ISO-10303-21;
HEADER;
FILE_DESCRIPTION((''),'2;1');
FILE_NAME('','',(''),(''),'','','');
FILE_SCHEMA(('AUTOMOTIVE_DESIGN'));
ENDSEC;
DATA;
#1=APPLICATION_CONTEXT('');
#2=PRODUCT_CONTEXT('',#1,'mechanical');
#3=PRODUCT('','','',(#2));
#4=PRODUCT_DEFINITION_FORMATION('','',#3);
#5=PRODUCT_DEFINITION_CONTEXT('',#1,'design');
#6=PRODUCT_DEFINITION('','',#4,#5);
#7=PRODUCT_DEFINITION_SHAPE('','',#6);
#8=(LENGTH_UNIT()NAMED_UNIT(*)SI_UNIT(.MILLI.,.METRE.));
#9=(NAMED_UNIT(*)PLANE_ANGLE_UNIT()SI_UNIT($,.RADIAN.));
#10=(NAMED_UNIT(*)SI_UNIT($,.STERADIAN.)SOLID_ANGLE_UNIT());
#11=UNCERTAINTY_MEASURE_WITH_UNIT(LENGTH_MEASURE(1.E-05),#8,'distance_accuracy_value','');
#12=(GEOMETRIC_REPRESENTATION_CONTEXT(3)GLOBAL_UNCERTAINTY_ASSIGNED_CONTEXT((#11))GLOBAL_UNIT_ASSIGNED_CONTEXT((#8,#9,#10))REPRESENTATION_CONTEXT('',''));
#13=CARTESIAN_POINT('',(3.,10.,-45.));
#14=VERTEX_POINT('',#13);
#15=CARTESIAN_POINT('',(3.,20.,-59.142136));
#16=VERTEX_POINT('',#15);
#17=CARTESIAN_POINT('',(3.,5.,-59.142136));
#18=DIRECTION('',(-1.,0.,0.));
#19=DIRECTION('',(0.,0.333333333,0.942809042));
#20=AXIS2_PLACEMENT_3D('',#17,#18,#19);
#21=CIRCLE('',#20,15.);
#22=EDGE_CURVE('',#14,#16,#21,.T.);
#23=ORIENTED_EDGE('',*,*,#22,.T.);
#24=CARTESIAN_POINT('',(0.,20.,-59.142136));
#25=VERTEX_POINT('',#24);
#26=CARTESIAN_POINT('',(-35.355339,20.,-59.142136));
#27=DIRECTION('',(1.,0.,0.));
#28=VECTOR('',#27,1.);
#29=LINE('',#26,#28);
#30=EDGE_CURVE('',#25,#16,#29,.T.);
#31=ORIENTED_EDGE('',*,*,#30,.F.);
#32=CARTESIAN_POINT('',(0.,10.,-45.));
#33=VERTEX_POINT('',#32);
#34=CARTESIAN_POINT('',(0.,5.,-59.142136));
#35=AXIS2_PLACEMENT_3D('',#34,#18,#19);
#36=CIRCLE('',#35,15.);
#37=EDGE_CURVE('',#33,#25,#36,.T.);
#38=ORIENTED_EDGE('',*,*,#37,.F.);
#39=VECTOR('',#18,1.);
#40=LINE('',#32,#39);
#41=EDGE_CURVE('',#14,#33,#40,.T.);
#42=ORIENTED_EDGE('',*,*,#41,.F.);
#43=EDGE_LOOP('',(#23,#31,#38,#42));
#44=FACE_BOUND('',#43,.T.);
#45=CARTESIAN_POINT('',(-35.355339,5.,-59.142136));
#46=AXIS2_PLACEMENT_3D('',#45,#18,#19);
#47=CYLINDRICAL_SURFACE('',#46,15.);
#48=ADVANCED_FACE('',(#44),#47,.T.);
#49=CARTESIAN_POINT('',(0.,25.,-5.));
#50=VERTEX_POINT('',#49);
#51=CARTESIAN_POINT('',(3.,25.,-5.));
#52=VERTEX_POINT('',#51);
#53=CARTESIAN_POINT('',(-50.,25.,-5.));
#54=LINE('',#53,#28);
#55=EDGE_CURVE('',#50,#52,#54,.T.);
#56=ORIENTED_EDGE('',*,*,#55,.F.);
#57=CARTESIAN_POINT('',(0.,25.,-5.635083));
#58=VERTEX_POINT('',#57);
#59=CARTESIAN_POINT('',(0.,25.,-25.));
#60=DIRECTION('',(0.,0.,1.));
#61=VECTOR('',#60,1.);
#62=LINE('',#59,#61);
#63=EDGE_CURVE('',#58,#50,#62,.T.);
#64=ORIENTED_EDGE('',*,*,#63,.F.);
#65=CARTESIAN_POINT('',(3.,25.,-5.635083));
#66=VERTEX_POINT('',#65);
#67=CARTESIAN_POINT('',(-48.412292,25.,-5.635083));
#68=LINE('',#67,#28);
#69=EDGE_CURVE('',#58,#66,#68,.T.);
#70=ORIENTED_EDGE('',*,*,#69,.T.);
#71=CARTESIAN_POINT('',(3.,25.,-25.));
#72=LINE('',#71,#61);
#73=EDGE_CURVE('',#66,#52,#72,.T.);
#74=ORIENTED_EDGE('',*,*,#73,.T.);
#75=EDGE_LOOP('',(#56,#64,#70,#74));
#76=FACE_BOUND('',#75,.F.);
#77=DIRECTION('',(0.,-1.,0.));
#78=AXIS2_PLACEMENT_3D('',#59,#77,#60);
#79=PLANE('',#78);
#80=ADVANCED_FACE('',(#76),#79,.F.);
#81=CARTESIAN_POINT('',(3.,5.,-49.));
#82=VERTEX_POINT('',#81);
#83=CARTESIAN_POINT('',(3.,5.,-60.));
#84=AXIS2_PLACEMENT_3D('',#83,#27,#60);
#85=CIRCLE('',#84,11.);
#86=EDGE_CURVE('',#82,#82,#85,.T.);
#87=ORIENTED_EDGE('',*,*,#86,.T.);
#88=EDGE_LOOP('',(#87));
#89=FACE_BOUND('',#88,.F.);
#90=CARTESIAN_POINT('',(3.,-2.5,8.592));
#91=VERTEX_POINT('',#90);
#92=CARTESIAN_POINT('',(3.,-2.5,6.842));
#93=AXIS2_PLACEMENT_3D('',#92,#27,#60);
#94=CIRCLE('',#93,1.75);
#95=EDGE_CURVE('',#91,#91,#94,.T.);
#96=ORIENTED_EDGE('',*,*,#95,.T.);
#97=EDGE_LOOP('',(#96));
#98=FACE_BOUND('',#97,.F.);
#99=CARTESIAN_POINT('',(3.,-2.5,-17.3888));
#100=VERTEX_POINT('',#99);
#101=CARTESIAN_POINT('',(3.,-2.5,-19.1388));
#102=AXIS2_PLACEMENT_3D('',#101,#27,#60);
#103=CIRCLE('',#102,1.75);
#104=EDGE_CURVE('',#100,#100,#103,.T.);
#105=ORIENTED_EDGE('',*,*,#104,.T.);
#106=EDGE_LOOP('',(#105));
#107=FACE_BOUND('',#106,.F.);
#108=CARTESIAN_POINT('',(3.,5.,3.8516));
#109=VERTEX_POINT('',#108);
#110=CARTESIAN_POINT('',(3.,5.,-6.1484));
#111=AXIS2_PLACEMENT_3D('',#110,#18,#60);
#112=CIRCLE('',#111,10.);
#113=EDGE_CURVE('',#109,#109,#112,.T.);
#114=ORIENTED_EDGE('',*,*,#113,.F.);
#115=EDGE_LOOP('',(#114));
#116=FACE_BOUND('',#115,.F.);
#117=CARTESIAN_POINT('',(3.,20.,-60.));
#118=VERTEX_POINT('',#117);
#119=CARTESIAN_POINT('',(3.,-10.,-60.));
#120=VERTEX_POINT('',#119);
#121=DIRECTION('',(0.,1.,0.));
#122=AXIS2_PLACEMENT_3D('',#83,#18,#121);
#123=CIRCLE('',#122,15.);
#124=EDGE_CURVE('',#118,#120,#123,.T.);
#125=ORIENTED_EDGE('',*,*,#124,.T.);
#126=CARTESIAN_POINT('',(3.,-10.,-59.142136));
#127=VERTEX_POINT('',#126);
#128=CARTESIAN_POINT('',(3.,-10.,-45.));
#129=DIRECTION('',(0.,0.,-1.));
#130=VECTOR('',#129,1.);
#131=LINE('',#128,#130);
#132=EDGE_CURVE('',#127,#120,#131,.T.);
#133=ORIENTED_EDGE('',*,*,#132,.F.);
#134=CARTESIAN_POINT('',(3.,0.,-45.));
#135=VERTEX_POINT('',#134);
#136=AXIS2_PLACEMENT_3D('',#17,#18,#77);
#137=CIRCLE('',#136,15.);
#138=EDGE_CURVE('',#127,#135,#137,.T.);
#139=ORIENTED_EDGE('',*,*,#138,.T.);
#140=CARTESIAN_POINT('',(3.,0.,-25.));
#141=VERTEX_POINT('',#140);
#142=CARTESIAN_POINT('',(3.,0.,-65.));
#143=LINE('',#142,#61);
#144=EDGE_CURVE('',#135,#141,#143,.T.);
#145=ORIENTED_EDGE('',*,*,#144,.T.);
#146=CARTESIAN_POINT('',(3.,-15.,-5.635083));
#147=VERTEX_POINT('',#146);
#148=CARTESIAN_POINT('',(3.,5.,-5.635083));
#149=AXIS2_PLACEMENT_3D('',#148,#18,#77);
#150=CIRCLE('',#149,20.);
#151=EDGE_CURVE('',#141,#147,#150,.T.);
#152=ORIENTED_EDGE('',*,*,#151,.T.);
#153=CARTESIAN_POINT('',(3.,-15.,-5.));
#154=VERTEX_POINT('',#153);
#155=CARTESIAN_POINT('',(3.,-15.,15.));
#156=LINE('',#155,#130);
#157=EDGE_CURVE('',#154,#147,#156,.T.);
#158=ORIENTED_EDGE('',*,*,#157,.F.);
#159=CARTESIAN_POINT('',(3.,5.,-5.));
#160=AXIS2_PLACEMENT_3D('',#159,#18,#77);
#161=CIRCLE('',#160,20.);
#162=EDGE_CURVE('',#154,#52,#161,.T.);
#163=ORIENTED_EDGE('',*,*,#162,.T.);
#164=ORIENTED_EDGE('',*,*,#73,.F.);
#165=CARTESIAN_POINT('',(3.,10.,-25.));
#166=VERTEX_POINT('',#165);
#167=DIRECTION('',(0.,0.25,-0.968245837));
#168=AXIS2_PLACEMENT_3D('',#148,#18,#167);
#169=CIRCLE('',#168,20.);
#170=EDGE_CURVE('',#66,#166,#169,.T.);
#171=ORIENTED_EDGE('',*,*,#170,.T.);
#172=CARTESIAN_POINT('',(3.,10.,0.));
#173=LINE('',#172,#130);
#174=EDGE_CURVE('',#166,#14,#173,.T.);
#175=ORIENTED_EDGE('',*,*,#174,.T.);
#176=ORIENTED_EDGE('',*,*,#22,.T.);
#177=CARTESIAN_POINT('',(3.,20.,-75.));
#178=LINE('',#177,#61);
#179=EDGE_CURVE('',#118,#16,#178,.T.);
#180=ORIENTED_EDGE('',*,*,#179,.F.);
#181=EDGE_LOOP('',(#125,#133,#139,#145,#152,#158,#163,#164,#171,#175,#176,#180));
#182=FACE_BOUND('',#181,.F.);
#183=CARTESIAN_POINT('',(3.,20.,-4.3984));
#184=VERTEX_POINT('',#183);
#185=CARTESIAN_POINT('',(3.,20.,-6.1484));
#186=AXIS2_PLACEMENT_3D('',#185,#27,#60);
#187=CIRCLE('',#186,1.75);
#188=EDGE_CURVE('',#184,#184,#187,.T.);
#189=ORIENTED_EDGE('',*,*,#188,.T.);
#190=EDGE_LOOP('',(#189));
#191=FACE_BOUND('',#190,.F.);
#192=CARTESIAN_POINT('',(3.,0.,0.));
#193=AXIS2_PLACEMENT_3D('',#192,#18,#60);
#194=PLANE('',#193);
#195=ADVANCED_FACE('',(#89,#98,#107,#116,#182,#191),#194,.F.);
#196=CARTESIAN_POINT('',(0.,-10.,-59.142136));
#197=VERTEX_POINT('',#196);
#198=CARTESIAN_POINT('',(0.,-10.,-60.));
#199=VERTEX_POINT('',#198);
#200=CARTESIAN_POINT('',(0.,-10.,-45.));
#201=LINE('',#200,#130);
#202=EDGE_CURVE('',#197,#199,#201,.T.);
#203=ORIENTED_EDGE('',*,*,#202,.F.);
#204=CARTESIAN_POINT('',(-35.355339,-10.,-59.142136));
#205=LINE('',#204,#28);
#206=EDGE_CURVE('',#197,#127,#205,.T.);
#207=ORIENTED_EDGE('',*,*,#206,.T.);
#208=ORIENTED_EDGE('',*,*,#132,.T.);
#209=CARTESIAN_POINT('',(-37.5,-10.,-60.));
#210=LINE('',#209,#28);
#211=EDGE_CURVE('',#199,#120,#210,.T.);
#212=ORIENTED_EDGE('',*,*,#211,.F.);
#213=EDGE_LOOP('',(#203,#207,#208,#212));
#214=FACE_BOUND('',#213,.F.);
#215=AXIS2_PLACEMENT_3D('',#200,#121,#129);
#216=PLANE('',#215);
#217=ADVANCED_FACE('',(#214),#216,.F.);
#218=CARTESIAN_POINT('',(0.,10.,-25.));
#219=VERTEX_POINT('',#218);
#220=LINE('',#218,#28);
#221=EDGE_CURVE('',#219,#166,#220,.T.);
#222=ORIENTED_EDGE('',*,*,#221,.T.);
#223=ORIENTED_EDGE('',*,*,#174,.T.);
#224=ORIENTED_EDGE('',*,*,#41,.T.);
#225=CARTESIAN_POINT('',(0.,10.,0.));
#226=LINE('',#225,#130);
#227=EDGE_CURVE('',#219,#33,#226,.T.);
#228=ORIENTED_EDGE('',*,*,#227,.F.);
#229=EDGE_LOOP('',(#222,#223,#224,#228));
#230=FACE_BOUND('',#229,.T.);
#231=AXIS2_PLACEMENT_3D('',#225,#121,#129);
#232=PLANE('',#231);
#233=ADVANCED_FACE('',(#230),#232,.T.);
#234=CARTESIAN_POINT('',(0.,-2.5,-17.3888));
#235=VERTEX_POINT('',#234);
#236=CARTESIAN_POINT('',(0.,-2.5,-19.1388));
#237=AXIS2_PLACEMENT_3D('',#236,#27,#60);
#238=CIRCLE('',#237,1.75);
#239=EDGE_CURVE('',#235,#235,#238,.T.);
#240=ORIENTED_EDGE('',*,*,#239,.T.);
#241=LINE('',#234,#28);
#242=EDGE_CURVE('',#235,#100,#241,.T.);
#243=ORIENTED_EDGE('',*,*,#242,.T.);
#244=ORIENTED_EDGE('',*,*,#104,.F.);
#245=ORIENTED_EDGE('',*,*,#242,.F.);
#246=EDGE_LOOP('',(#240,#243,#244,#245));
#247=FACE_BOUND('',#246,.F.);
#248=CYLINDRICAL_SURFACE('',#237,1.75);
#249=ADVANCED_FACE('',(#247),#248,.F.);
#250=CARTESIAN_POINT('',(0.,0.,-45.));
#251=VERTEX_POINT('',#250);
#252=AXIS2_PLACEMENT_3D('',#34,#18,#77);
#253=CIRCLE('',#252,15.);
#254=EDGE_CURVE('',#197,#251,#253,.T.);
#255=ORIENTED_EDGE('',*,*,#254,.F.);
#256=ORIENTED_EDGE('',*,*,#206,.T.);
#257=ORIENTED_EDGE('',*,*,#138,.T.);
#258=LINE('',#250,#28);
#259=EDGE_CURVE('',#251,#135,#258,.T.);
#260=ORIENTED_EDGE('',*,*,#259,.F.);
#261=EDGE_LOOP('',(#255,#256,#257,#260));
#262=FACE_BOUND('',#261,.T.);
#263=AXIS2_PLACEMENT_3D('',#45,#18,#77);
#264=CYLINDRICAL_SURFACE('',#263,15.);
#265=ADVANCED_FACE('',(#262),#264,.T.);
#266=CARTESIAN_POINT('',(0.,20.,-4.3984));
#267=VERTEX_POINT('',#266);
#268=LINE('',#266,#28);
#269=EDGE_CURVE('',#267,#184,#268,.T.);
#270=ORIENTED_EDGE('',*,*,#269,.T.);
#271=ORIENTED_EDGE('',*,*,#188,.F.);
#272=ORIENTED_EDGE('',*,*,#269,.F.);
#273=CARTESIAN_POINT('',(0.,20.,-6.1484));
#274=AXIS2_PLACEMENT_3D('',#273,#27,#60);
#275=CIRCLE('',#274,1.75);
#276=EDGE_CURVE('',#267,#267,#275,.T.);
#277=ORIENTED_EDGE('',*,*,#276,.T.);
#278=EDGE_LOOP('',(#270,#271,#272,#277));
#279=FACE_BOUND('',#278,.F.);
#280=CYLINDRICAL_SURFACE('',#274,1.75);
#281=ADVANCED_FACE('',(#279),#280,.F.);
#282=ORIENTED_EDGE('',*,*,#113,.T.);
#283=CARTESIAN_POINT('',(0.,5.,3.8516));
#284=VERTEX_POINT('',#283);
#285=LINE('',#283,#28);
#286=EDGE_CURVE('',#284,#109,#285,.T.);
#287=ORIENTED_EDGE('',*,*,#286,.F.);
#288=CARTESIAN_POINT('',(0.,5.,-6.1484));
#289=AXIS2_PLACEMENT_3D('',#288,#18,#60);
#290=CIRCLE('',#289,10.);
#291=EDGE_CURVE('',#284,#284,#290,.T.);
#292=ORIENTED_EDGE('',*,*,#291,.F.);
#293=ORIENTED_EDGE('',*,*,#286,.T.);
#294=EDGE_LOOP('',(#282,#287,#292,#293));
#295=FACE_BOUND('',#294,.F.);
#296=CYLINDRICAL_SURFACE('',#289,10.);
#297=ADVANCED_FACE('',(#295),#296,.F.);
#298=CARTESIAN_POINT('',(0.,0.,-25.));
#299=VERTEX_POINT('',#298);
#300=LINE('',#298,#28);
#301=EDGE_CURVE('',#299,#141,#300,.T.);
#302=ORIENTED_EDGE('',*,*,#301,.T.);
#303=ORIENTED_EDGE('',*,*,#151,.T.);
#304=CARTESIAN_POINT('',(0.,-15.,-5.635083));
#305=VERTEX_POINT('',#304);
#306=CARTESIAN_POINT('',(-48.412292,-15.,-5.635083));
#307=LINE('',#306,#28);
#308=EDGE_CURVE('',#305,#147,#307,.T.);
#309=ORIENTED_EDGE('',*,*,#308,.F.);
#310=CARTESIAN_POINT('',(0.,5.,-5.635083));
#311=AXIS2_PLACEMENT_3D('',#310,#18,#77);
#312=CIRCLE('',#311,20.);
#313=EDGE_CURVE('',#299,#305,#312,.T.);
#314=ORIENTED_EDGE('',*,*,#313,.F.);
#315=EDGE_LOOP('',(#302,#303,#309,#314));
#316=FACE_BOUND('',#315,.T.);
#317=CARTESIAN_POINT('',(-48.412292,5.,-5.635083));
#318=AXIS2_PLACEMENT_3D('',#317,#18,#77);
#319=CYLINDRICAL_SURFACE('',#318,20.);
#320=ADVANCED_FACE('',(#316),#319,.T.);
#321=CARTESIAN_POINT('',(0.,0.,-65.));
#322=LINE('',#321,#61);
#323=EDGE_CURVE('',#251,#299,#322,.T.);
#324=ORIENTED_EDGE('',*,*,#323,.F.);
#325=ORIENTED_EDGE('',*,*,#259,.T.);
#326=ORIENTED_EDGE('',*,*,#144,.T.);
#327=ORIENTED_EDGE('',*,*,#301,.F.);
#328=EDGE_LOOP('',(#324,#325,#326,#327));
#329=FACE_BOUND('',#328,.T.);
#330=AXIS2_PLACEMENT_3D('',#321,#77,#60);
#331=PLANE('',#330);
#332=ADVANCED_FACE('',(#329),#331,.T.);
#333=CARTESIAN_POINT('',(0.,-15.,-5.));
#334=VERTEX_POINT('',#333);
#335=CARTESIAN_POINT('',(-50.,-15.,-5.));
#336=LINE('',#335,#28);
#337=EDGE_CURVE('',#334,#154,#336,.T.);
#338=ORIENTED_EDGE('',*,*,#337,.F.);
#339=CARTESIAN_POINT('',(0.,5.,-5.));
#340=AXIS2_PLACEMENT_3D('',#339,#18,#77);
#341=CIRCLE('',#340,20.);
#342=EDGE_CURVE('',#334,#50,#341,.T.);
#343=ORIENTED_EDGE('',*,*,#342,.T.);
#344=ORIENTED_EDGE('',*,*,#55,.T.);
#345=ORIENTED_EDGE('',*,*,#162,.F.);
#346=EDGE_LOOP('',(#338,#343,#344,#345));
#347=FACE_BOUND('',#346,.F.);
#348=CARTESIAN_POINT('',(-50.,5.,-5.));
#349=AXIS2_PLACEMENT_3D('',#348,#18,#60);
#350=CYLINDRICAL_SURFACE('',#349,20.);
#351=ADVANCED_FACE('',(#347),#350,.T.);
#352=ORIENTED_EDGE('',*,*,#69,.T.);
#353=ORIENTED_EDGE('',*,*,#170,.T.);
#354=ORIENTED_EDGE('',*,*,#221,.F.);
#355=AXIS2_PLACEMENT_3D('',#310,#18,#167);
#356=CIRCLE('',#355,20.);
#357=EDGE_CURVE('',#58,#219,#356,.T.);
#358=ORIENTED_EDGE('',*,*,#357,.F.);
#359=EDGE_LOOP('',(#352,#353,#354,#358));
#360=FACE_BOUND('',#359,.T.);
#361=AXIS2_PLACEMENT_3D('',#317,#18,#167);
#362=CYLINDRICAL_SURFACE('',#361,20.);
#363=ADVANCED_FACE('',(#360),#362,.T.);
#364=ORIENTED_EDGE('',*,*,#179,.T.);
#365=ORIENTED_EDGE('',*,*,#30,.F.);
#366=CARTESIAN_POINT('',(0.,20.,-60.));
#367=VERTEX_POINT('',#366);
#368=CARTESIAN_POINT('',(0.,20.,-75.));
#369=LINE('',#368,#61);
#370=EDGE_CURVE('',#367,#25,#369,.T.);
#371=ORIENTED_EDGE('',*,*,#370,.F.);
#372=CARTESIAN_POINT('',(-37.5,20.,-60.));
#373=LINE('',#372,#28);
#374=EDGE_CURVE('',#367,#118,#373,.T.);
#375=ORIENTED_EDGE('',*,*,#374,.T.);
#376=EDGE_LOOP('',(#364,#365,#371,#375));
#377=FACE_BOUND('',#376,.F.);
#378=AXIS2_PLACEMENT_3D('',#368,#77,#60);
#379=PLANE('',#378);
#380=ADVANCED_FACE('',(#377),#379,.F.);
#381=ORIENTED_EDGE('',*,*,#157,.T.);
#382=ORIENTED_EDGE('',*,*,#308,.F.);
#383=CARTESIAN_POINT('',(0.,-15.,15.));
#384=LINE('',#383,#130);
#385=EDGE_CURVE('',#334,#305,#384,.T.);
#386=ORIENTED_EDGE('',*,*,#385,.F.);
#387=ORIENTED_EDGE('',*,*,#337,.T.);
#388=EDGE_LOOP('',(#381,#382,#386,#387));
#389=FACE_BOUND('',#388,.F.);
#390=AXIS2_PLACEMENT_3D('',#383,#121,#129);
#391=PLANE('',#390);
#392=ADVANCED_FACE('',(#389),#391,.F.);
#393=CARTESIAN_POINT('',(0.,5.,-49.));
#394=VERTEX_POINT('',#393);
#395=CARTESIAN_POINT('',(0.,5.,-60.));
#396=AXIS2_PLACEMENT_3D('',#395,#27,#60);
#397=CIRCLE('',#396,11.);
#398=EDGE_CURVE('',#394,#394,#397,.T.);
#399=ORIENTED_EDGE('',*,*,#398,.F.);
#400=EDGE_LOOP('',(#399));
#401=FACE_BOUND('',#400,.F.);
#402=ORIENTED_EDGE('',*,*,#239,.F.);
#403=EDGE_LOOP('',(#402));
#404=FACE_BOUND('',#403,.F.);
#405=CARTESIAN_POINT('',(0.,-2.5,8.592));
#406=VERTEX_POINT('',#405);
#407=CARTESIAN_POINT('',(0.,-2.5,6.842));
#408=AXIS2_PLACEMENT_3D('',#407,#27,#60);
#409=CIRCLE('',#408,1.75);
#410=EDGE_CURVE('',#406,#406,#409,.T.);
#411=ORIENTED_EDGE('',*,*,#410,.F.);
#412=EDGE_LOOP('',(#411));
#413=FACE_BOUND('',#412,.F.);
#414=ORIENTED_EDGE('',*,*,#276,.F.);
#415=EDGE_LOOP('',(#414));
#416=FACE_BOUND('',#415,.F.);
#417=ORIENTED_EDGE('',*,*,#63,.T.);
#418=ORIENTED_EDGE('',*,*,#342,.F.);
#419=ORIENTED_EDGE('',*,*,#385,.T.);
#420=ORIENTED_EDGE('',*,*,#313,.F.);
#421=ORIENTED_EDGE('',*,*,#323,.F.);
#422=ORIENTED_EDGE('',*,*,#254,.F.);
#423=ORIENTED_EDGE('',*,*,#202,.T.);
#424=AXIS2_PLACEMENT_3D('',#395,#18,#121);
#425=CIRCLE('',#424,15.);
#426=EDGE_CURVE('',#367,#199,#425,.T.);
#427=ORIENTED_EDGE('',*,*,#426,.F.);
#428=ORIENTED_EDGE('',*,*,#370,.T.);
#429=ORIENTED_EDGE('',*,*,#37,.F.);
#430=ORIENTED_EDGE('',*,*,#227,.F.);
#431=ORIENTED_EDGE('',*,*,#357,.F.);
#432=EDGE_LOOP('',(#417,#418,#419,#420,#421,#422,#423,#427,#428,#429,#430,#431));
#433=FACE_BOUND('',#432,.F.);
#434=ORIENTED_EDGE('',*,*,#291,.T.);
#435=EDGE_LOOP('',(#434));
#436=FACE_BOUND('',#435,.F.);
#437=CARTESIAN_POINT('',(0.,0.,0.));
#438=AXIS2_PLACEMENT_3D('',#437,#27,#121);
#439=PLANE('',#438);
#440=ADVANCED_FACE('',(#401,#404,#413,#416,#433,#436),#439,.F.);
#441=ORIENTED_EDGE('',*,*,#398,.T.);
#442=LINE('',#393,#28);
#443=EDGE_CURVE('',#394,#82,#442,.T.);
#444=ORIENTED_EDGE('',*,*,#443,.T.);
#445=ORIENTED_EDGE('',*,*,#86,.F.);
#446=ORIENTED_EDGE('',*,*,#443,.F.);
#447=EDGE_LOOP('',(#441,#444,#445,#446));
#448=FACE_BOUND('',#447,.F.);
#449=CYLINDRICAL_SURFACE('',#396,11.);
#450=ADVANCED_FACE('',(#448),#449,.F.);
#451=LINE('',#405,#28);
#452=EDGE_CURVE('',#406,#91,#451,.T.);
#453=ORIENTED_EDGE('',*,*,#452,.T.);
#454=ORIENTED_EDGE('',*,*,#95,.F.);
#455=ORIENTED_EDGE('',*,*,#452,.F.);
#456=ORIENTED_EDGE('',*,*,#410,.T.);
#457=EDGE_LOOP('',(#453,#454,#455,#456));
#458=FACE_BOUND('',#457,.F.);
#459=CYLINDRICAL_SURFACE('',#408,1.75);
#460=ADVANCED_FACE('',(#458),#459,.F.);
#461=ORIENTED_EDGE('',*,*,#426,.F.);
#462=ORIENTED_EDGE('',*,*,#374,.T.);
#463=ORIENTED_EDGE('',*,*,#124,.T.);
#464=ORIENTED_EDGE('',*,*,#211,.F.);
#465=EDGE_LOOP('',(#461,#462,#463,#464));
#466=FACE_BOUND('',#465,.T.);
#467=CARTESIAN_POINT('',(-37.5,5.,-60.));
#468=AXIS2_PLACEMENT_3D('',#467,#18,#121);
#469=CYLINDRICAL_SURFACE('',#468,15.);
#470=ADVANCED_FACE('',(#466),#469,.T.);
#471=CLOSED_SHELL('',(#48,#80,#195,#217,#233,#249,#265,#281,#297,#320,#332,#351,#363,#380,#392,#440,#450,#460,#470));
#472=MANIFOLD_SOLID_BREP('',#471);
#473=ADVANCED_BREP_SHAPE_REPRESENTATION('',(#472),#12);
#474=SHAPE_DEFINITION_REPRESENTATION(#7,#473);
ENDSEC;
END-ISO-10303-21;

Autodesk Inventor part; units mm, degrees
ref_plane "YZ Plane" through (0, 0, 0) normal (1, 0, 0) x (0, 1, 0)
ref_plane "XZ Plane" through (0, 0, 0) normal (0, 1, 0) x (-1, 0, 0)
ref_plane "XY Plane" through (0, 0, 0) normal (0, 0, 1) x (1, 0, 0)
sketch "Esquisse1" plane through (0, 0, 0) normal (1, 0, 0) x (0, 1, 0)
  line L0 (0, 0) -> (10, 0)
  line L1 (10, 0) -> (10, -65)
  line L2 (10, -65) -> (0, -65)
  line L3 (0, -65) -> (0, 0)
  point P0 (5, -5)
  point P1 (5, -54.2442)
  dimension "d0" = 65
  dimension "d1" = 10
  dimension "d2" = 5
  dimension "d3" = 5
  dimension "d4" = 49.2442
  dimension "d5" = 5
extrude "Extrusion1" add sketch "Esquisse1" along normal blind 3
sketch "Esquisse2" plane through (0, 0, 0) normal (-1, 0, 0) x (0, 0, 1)
  line L0 (-25, 25) -> (15, 25)
  line L1 (15, 25) -> (15, -15)
  line L2 (15, -15) -> (-25, -15)
  line L3 (-25, -15) -> (-25, 25)
  line L4 (-65, 0) -> (0, 0) projected
  line L5 (0, 0) -> (0, 10) projected
  line L6 (-50, -10) -> (-80, -10)
  line L7 (-80, -10) -> (-80, 20)
  line L8 (-80, 20) -> (-50, 20)
  line L9 (-50, 20) -> (-50, -10)
  line L10 (-65, 10) -> (-65, 0) projected
  dimension "d8" = 40
  dimension "d9" = 25
  dimension "d10" = 40
  dimension "d11" = 25
  dimension "d36" = 30
  dimension "d37" = 30
  dimension "d38" = 20
  dimension "d39" = 15
extrude "Extrusion2" add sketch "Esquisse2" against normal blind 3 contours L0 L1 L2 L3
sketch "Esquisse3" plane through (0, 0, 0) normal (-1, 0, 0) x (0, 0, 1)
  line L0 (-65, 10) -> (-25, 10) projected
  line L1 (-65, 10) -> (-65, 0) projected
  line L2 (-65, 0) -> (-25, 0) projected
  circle A0 centre (-60, 5) radius 4
  circle A1 centre (-6.1484, 5) radius 10
  point P0 (0, 0)
  dimension "d14" = 5
  dimension "d15" = 5
  dimension "d16" = 53.8516
  dimension "d17" = 5
  dimension "d18" = 8
  dimension "d19" = 20
extrude "Extrusion3" cut sketch "Esquisse3" against normal blind 3
sketch "Esquisse4" plane through (0, 0, 0) normal (-1, 0, 0) x (0, 0, 1)
  circle A0 centre (-6.1484, 5) radius 10 projected
  circle A1 centre (-6.1484, 5) radius 15
  point P0 (0, 0)
  point P1 (-6.1484, 20)
  point P2 (-19.1388, -2.5)
  point P3 (6.842, -2.5)
  dimension "d22" = 30
  dimension "d25" = 360
hole "Perçage1" at (0, 20, -6.1484) at (0, -2.5, -19.1388) at (0, -2.5, 6.842) direction (1, 0, 0) diameter 3.5 depth 3 tip angle 118
fillet "Congé1" radius 3 2 edges at (1.5, 10, -65) (1.5, 0, -65)
fillet "Congé2" radius 20 4 edges at (1.5, -15, -25) (1.5, 25, -25) (1.5, -15, 15) (1.5, 25, 15)
sketch "Esquisse5" plane through (0, 0, 0) normal (-1, 0, 0) x (0, 0, 1)
  line L0 (-75, 20) -> (-45, 20)
  line L1 (-45, 20) -> (-45, -10)
  line L2 (-45, -10) -> (-75, -10)
  line L3 (-75, -10) -> (-75, 20)
  line L4 (-62, 0) -> (-25, 0) projected
  line L5 (-65, 7) -> (-65, 3) projected
  point P0 (0, 0)
  dimension "d40" = 30
  dimension "d41" = 30
  dimension "d42" = 20
  dimension "d43" = 10
extrude "Extrusion4" add sketch "Esquisse5" against normal blind 3
sketch "Esquisse6" plane through (0, 0, 0) normal (-1, 0, 0) x (0, 0, 1)
  line L0 (-75, 20) -> (-45, 20) projected
  circle A0 centre (-6.1484, 5) radius 10 projected
  point P0 (0, 0)
  point P1 (-60, 5)
  dimension "d46" = 15
  dimension "d47" = 53.8516
hole "Perçage2" at (0, 5, -60) direction (1, 0, 0) diameter 22 depth 3 tip angle 118
fillet "Congé3" radius 15 4 edges at (1.5, -10, -75) (1.5, -10, -45) (1.5, 20, -45) (1.5, 20, -75)
properties part number "barrecodeuse"
